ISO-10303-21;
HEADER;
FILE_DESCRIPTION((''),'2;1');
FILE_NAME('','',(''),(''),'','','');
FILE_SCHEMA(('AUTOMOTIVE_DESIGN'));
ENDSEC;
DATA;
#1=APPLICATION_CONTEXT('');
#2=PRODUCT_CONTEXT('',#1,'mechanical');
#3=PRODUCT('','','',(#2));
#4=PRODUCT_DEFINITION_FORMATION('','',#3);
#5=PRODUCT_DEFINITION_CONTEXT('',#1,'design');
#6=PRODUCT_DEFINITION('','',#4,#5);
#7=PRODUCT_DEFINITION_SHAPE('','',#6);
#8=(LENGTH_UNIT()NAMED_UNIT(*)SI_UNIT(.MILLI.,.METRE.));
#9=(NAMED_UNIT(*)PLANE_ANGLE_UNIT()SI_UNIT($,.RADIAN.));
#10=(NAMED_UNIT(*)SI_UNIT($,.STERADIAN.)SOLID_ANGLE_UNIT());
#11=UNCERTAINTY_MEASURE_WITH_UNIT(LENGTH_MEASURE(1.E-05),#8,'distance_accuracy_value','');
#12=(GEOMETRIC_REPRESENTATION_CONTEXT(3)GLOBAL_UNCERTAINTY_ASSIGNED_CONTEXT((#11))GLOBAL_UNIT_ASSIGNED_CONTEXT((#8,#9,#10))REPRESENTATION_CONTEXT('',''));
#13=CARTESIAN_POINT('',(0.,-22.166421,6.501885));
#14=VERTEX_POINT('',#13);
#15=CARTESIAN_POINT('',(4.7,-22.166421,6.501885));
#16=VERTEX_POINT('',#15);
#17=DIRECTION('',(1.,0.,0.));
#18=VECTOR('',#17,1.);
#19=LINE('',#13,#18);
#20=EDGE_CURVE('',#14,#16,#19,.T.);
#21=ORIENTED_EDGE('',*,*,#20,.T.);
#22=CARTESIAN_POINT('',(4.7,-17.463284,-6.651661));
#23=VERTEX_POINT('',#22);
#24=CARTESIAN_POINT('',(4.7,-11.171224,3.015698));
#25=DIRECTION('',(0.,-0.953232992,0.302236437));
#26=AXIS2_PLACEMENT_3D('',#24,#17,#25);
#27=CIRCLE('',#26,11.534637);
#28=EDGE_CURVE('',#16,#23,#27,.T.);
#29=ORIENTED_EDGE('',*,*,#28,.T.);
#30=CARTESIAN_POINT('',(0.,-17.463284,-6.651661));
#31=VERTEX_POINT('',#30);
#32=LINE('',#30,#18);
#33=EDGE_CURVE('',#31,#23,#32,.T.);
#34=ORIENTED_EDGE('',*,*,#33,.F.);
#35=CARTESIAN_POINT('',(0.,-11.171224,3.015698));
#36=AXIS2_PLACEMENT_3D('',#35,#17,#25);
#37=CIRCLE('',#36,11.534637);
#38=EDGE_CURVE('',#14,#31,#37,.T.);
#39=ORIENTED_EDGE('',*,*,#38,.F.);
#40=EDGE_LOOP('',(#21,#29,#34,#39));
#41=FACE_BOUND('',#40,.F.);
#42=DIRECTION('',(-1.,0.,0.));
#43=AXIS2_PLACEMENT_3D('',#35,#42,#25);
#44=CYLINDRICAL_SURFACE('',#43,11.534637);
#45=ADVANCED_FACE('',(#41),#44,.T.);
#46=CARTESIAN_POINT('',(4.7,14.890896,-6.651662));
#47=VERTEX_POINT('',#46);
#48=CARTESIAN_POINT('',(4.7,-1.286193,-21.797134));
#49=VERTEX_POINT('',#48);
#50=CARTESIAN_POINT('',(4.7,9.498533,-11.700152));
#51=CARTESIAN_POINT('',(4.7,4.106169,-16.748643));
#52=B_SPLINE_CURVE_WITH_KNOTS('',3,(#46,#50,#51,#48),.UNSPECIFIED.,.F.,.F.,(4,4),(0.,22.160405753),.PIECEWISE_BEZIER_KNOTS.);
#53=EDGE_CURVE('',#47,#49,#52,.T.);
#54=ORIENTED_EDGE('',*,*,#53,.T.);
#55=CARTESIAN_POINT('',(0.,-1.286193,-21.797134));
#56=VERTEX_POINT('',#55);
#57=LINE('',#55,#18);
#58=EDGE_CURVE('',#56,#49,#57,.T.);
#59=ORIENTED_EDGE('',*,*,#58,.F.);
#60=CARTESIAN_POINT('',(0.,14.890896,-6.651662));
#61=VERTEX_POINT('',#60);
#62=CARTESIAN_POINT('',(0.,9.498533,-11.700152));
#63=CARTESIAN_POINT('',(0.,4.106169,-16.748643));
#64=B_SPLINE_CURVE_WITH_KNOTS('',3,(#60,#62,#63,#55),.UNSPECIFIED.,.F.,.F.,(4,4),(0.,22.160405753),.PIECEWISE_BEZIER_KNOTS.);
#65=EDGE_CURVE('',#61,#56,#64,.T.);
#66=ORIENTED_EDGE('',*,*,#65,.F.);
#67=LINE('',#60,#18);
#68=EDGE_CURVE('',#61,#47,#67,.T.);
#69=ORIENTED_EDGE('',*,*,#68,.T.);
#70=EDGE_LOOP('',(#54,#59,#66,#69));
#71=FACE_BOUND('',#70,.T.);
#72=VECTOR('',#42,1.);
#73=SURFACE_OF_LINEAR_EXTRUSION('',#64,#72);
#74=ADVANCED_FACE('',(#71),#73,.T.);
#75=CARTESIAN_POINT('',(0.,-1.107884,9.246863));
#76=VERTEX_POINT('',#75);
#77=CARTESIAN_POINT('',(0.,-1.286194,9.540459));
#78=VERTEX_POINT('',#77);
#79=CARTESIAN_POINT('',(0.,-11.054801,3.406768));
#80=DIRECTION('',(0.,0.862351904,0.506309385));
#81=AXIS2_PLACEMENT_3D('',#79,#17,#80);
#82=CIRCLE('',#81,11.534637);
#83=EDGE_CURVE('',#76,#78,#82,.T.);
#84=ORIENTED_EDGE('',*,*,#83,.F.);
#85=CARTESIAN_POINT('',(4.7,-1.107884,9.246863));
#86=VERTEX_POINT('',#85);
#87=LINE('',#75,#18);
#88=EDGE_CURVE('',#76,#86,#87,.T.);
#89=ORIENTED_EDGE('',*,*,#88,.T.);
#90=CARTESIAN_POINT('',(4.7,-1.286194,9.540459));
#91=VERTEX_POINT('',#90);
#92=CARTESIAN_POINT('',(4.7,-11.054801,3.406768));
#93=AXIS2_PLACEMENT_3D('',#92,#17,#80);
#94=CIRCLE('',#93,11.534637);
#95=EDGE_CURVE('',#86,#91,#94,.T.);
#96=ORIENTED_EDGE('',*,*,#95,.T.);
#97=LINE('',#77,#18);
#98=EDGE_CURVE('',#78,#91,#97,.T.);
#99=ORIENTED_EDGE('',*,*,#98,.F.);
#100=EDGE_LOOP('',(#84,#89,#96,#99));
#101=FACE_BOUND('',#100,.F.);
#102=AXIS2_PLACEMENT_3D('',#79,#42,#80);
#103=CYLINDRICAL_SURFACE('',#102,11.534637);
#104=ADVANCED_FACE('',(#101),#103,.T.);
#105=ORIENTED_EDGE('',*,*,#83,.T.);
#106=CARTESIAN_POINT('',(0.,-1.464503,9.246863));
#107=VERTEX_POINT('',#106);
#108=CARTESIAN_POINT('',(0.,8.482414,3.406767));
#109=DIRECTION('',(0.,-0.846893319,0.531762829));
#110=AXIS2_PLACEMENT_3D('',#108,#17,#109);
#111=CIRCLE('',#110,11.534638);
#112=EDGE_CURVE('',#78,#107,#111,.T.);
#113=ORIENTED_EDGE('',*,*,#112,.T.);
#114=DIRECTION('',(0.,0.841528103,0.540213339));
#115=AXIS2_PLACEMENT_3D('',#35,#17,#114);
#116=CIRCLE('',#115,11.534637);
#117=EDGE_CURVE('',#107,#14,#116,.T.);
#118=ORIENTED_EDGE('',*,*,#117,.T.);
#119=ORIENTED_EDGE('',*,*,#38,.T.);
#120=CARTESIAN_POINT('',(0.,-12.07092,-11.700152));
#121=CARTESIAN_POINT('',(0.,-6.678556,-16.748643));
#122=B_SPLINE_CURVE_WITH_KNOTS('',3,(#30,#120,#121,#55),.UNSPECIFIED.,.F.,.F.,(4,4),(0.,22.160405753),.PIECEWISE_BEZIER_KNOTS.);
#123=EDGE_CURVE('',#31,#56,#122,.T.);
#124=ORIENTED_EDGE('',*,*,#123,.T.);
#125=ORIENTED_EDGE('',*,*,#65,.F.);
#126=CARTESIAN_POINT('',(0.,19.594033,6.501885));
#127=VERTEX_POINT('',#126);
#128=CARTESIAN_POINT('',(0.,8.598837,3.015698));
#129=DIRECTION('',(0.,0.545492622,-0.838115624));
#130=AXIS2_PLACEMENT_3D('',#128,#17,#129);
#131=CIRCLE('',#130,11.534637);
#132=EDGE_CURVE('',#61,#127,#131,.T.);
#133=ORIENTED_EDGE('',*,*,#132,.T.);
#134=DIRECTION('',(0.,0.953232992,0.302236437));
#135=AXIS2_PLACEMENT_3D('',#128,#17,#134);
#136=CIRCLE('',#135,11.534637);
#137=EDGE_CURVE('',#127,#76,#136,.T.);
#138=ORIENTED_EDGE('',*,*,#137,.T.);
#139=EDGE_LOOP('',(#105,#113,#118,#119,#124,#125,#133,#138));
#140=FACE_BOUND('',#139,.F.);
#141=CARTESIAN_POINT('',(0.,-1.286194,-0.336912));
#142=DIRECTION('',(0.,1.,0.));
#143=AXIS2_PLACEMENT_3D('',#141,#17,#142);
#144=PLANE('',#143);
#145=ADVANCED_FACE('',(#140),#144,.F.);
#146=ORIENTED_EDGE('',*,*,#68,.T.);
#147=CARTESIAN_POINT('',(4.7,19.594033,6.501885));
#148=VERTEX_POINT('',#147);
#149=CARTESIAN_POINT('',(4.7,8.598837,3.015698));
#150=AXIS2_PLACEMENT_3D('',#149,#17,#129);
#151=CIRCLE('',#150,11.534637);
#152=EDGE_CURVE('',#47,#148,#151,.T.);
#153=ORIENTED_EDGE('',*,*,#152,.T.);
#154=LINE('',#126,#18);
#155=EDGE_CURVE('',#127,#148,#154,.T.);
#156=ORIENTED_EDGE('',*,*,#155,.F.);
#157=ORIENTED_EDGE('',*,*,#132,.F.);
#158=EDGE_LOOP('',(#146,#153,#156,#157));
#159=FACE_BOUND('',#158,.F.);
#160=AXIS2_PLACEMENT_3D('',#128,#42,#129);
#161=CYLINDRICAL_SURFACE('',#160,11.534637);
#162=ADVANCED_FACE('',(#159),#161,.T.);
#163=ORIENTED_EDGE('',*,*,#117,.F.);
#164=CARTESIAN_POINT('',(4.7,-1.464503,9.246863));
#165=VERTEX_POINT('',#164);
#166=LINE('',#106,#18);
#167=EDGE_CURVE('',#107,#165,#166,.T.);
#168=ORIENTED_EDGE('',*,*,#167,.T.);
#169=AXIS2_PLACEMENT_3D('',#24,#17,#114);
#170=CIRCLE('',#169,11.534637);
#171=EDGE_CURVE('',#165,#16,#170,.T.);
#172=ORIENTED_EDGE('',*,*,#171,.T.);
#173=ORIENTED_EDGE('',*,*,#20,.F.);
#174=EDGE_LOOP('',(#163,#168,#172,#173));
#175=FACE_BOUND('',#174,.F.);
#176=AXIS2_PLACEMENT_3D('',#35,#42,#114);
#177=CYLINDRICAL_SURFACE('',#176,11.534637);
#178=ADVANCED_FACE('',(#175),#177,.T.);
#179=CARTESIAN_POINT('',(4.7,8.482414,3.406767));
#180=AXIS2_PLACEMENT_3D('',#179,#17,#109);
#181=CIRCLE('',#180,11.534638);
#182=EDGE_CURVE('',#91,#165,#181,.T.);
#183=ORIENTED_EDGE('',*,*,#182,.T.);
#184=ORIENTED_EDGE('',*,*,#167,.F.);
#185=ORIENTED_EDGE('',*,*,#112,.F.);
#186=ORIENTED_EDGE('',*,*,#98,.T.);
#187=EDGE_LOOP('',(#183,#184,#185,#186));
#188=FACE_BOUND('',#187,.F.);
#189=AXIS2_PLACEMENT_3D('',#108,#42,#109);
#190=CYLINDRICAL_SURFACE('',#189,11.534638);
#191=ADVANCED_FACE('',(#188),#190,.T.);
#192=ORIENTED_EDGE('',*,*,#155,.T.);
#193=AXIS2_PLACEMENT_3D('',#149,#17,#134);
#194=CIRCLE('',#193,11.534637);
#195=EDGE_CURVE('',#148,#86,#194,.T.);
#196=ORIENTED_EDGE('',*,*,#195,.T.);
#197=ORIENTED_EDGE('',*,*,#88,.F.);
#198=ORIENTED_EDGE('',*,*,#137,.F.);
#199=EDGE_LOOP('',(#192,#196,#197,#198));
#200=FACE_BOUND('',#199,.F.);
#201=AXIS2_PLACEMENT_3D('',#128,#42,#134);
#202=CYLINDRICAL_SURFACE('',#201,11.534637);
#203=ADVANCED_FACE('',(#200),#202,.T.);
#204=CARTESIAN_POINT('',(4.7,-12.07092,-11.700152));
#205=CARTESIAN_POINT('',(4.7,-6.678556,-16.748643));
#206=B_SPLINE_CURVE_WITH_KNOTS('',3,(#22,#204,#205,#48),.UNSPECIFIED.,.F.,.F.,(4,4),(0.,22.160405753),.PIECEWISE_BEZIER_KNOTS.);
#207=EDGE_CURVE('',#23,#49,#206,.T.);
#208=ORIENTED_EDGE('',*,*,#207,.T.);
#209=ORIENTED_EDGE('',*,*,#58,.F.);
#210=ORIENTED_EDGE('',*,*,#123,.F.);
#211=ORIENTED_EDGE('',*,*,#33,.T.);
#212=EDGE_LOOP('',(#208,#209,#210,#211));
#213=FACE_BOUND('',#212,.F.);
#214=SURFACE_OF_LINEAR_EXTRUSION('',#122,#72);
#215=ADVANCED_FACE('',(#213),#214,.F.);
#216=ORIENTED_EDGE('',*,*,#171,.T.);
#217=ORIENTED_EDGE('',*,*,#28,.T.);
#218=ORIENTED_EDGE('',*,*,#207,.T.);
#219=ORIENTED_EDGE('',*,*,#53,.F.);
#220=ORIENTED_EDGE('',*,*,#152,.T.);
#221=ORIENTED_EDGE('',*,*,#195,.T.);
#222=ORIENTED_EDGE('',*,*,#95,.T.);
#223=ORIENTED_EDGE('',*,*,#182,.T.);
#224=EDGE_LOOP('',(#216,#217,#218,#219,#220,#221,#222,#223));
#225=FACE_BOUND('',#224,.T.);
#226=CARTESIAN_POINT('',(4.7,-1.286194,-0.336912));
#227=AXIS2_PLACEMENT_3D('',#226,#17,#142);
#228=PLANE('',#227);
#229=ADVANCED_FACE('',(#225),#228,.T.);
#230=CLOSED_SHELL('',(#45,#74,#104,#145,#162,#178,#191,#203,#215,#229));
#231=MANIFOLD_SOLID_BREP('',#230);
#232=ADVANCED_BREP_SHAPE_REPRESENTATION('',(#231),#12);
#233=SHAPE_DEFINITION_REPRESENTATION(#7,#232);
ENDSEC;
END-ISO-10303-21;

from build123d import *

# Parameters (mm, degrees)
F1_DEPTH = 4.7


# Not quite as in the source:
# - ends of sketch curves that miss each other by under 0.0002 mm in the source are joined


with BuildPart() as f1:
    # F0 (on Right) → F1 (new body)
    with BuildSketch(Plane.YZ):
        with BuildLine():
            ThreePointArc((-1.2861936627, 9.5404589046), (-1.3764412196, 9.3943245755), (-1.4645028348, 9.2468626631))
            ThreePointArc((-1.4645028348, 9.2468626631), (-12.6873926867, 14.4502544968), (-22.1664207404, 6.501885459))
            ThreePointArc((-22.1664207404, 6.501885459), (-22.0324514747, -0.8678048449), (-17.463284327, -6.6516612154))
            add(Edge.make_bspline(
                [(-17.463284327, -6.6516612154), (-12.0709199928, -11.7001523748), (-6.6785564381, -16.7486430269), (-1.2861928833, -21.797133679)],
                knots=[0, 0, 0, 0, 22.160405753, 22.160405753, 22.160405753, 22.160405753], degree=3))
            add(Edge.make_bspline(
                [(14.8908962222, -6.6516617227), (9.4985326674, -11.7001523748), (4.1061691126, -16.7486430269), (-1.2861928833, -21.797133679)],
                knots=[0, 0, 0, 0, 22.160405753, 22.160405753, 22.160405753, 22.160405753], degree=3))
            ThreePointArc((14.8908962222, -6.6516617227), (19.4600641493, -0.8678048449), (19.594033415, 6.501885459))
            ThreePointArc((19.594033415, 6.501885459), (10.1150053613, 14.4502544968), (-1.1078844907, 9.2468626631))
            ThreePointArc((-1.1078844907, 9.2468626631), (-1.1959461058, 9.3943245755), (-1.2861936627, 9.5404589046))
        make_face()
    extrude(amount=F1_DEPTH)


solid = f1.part
